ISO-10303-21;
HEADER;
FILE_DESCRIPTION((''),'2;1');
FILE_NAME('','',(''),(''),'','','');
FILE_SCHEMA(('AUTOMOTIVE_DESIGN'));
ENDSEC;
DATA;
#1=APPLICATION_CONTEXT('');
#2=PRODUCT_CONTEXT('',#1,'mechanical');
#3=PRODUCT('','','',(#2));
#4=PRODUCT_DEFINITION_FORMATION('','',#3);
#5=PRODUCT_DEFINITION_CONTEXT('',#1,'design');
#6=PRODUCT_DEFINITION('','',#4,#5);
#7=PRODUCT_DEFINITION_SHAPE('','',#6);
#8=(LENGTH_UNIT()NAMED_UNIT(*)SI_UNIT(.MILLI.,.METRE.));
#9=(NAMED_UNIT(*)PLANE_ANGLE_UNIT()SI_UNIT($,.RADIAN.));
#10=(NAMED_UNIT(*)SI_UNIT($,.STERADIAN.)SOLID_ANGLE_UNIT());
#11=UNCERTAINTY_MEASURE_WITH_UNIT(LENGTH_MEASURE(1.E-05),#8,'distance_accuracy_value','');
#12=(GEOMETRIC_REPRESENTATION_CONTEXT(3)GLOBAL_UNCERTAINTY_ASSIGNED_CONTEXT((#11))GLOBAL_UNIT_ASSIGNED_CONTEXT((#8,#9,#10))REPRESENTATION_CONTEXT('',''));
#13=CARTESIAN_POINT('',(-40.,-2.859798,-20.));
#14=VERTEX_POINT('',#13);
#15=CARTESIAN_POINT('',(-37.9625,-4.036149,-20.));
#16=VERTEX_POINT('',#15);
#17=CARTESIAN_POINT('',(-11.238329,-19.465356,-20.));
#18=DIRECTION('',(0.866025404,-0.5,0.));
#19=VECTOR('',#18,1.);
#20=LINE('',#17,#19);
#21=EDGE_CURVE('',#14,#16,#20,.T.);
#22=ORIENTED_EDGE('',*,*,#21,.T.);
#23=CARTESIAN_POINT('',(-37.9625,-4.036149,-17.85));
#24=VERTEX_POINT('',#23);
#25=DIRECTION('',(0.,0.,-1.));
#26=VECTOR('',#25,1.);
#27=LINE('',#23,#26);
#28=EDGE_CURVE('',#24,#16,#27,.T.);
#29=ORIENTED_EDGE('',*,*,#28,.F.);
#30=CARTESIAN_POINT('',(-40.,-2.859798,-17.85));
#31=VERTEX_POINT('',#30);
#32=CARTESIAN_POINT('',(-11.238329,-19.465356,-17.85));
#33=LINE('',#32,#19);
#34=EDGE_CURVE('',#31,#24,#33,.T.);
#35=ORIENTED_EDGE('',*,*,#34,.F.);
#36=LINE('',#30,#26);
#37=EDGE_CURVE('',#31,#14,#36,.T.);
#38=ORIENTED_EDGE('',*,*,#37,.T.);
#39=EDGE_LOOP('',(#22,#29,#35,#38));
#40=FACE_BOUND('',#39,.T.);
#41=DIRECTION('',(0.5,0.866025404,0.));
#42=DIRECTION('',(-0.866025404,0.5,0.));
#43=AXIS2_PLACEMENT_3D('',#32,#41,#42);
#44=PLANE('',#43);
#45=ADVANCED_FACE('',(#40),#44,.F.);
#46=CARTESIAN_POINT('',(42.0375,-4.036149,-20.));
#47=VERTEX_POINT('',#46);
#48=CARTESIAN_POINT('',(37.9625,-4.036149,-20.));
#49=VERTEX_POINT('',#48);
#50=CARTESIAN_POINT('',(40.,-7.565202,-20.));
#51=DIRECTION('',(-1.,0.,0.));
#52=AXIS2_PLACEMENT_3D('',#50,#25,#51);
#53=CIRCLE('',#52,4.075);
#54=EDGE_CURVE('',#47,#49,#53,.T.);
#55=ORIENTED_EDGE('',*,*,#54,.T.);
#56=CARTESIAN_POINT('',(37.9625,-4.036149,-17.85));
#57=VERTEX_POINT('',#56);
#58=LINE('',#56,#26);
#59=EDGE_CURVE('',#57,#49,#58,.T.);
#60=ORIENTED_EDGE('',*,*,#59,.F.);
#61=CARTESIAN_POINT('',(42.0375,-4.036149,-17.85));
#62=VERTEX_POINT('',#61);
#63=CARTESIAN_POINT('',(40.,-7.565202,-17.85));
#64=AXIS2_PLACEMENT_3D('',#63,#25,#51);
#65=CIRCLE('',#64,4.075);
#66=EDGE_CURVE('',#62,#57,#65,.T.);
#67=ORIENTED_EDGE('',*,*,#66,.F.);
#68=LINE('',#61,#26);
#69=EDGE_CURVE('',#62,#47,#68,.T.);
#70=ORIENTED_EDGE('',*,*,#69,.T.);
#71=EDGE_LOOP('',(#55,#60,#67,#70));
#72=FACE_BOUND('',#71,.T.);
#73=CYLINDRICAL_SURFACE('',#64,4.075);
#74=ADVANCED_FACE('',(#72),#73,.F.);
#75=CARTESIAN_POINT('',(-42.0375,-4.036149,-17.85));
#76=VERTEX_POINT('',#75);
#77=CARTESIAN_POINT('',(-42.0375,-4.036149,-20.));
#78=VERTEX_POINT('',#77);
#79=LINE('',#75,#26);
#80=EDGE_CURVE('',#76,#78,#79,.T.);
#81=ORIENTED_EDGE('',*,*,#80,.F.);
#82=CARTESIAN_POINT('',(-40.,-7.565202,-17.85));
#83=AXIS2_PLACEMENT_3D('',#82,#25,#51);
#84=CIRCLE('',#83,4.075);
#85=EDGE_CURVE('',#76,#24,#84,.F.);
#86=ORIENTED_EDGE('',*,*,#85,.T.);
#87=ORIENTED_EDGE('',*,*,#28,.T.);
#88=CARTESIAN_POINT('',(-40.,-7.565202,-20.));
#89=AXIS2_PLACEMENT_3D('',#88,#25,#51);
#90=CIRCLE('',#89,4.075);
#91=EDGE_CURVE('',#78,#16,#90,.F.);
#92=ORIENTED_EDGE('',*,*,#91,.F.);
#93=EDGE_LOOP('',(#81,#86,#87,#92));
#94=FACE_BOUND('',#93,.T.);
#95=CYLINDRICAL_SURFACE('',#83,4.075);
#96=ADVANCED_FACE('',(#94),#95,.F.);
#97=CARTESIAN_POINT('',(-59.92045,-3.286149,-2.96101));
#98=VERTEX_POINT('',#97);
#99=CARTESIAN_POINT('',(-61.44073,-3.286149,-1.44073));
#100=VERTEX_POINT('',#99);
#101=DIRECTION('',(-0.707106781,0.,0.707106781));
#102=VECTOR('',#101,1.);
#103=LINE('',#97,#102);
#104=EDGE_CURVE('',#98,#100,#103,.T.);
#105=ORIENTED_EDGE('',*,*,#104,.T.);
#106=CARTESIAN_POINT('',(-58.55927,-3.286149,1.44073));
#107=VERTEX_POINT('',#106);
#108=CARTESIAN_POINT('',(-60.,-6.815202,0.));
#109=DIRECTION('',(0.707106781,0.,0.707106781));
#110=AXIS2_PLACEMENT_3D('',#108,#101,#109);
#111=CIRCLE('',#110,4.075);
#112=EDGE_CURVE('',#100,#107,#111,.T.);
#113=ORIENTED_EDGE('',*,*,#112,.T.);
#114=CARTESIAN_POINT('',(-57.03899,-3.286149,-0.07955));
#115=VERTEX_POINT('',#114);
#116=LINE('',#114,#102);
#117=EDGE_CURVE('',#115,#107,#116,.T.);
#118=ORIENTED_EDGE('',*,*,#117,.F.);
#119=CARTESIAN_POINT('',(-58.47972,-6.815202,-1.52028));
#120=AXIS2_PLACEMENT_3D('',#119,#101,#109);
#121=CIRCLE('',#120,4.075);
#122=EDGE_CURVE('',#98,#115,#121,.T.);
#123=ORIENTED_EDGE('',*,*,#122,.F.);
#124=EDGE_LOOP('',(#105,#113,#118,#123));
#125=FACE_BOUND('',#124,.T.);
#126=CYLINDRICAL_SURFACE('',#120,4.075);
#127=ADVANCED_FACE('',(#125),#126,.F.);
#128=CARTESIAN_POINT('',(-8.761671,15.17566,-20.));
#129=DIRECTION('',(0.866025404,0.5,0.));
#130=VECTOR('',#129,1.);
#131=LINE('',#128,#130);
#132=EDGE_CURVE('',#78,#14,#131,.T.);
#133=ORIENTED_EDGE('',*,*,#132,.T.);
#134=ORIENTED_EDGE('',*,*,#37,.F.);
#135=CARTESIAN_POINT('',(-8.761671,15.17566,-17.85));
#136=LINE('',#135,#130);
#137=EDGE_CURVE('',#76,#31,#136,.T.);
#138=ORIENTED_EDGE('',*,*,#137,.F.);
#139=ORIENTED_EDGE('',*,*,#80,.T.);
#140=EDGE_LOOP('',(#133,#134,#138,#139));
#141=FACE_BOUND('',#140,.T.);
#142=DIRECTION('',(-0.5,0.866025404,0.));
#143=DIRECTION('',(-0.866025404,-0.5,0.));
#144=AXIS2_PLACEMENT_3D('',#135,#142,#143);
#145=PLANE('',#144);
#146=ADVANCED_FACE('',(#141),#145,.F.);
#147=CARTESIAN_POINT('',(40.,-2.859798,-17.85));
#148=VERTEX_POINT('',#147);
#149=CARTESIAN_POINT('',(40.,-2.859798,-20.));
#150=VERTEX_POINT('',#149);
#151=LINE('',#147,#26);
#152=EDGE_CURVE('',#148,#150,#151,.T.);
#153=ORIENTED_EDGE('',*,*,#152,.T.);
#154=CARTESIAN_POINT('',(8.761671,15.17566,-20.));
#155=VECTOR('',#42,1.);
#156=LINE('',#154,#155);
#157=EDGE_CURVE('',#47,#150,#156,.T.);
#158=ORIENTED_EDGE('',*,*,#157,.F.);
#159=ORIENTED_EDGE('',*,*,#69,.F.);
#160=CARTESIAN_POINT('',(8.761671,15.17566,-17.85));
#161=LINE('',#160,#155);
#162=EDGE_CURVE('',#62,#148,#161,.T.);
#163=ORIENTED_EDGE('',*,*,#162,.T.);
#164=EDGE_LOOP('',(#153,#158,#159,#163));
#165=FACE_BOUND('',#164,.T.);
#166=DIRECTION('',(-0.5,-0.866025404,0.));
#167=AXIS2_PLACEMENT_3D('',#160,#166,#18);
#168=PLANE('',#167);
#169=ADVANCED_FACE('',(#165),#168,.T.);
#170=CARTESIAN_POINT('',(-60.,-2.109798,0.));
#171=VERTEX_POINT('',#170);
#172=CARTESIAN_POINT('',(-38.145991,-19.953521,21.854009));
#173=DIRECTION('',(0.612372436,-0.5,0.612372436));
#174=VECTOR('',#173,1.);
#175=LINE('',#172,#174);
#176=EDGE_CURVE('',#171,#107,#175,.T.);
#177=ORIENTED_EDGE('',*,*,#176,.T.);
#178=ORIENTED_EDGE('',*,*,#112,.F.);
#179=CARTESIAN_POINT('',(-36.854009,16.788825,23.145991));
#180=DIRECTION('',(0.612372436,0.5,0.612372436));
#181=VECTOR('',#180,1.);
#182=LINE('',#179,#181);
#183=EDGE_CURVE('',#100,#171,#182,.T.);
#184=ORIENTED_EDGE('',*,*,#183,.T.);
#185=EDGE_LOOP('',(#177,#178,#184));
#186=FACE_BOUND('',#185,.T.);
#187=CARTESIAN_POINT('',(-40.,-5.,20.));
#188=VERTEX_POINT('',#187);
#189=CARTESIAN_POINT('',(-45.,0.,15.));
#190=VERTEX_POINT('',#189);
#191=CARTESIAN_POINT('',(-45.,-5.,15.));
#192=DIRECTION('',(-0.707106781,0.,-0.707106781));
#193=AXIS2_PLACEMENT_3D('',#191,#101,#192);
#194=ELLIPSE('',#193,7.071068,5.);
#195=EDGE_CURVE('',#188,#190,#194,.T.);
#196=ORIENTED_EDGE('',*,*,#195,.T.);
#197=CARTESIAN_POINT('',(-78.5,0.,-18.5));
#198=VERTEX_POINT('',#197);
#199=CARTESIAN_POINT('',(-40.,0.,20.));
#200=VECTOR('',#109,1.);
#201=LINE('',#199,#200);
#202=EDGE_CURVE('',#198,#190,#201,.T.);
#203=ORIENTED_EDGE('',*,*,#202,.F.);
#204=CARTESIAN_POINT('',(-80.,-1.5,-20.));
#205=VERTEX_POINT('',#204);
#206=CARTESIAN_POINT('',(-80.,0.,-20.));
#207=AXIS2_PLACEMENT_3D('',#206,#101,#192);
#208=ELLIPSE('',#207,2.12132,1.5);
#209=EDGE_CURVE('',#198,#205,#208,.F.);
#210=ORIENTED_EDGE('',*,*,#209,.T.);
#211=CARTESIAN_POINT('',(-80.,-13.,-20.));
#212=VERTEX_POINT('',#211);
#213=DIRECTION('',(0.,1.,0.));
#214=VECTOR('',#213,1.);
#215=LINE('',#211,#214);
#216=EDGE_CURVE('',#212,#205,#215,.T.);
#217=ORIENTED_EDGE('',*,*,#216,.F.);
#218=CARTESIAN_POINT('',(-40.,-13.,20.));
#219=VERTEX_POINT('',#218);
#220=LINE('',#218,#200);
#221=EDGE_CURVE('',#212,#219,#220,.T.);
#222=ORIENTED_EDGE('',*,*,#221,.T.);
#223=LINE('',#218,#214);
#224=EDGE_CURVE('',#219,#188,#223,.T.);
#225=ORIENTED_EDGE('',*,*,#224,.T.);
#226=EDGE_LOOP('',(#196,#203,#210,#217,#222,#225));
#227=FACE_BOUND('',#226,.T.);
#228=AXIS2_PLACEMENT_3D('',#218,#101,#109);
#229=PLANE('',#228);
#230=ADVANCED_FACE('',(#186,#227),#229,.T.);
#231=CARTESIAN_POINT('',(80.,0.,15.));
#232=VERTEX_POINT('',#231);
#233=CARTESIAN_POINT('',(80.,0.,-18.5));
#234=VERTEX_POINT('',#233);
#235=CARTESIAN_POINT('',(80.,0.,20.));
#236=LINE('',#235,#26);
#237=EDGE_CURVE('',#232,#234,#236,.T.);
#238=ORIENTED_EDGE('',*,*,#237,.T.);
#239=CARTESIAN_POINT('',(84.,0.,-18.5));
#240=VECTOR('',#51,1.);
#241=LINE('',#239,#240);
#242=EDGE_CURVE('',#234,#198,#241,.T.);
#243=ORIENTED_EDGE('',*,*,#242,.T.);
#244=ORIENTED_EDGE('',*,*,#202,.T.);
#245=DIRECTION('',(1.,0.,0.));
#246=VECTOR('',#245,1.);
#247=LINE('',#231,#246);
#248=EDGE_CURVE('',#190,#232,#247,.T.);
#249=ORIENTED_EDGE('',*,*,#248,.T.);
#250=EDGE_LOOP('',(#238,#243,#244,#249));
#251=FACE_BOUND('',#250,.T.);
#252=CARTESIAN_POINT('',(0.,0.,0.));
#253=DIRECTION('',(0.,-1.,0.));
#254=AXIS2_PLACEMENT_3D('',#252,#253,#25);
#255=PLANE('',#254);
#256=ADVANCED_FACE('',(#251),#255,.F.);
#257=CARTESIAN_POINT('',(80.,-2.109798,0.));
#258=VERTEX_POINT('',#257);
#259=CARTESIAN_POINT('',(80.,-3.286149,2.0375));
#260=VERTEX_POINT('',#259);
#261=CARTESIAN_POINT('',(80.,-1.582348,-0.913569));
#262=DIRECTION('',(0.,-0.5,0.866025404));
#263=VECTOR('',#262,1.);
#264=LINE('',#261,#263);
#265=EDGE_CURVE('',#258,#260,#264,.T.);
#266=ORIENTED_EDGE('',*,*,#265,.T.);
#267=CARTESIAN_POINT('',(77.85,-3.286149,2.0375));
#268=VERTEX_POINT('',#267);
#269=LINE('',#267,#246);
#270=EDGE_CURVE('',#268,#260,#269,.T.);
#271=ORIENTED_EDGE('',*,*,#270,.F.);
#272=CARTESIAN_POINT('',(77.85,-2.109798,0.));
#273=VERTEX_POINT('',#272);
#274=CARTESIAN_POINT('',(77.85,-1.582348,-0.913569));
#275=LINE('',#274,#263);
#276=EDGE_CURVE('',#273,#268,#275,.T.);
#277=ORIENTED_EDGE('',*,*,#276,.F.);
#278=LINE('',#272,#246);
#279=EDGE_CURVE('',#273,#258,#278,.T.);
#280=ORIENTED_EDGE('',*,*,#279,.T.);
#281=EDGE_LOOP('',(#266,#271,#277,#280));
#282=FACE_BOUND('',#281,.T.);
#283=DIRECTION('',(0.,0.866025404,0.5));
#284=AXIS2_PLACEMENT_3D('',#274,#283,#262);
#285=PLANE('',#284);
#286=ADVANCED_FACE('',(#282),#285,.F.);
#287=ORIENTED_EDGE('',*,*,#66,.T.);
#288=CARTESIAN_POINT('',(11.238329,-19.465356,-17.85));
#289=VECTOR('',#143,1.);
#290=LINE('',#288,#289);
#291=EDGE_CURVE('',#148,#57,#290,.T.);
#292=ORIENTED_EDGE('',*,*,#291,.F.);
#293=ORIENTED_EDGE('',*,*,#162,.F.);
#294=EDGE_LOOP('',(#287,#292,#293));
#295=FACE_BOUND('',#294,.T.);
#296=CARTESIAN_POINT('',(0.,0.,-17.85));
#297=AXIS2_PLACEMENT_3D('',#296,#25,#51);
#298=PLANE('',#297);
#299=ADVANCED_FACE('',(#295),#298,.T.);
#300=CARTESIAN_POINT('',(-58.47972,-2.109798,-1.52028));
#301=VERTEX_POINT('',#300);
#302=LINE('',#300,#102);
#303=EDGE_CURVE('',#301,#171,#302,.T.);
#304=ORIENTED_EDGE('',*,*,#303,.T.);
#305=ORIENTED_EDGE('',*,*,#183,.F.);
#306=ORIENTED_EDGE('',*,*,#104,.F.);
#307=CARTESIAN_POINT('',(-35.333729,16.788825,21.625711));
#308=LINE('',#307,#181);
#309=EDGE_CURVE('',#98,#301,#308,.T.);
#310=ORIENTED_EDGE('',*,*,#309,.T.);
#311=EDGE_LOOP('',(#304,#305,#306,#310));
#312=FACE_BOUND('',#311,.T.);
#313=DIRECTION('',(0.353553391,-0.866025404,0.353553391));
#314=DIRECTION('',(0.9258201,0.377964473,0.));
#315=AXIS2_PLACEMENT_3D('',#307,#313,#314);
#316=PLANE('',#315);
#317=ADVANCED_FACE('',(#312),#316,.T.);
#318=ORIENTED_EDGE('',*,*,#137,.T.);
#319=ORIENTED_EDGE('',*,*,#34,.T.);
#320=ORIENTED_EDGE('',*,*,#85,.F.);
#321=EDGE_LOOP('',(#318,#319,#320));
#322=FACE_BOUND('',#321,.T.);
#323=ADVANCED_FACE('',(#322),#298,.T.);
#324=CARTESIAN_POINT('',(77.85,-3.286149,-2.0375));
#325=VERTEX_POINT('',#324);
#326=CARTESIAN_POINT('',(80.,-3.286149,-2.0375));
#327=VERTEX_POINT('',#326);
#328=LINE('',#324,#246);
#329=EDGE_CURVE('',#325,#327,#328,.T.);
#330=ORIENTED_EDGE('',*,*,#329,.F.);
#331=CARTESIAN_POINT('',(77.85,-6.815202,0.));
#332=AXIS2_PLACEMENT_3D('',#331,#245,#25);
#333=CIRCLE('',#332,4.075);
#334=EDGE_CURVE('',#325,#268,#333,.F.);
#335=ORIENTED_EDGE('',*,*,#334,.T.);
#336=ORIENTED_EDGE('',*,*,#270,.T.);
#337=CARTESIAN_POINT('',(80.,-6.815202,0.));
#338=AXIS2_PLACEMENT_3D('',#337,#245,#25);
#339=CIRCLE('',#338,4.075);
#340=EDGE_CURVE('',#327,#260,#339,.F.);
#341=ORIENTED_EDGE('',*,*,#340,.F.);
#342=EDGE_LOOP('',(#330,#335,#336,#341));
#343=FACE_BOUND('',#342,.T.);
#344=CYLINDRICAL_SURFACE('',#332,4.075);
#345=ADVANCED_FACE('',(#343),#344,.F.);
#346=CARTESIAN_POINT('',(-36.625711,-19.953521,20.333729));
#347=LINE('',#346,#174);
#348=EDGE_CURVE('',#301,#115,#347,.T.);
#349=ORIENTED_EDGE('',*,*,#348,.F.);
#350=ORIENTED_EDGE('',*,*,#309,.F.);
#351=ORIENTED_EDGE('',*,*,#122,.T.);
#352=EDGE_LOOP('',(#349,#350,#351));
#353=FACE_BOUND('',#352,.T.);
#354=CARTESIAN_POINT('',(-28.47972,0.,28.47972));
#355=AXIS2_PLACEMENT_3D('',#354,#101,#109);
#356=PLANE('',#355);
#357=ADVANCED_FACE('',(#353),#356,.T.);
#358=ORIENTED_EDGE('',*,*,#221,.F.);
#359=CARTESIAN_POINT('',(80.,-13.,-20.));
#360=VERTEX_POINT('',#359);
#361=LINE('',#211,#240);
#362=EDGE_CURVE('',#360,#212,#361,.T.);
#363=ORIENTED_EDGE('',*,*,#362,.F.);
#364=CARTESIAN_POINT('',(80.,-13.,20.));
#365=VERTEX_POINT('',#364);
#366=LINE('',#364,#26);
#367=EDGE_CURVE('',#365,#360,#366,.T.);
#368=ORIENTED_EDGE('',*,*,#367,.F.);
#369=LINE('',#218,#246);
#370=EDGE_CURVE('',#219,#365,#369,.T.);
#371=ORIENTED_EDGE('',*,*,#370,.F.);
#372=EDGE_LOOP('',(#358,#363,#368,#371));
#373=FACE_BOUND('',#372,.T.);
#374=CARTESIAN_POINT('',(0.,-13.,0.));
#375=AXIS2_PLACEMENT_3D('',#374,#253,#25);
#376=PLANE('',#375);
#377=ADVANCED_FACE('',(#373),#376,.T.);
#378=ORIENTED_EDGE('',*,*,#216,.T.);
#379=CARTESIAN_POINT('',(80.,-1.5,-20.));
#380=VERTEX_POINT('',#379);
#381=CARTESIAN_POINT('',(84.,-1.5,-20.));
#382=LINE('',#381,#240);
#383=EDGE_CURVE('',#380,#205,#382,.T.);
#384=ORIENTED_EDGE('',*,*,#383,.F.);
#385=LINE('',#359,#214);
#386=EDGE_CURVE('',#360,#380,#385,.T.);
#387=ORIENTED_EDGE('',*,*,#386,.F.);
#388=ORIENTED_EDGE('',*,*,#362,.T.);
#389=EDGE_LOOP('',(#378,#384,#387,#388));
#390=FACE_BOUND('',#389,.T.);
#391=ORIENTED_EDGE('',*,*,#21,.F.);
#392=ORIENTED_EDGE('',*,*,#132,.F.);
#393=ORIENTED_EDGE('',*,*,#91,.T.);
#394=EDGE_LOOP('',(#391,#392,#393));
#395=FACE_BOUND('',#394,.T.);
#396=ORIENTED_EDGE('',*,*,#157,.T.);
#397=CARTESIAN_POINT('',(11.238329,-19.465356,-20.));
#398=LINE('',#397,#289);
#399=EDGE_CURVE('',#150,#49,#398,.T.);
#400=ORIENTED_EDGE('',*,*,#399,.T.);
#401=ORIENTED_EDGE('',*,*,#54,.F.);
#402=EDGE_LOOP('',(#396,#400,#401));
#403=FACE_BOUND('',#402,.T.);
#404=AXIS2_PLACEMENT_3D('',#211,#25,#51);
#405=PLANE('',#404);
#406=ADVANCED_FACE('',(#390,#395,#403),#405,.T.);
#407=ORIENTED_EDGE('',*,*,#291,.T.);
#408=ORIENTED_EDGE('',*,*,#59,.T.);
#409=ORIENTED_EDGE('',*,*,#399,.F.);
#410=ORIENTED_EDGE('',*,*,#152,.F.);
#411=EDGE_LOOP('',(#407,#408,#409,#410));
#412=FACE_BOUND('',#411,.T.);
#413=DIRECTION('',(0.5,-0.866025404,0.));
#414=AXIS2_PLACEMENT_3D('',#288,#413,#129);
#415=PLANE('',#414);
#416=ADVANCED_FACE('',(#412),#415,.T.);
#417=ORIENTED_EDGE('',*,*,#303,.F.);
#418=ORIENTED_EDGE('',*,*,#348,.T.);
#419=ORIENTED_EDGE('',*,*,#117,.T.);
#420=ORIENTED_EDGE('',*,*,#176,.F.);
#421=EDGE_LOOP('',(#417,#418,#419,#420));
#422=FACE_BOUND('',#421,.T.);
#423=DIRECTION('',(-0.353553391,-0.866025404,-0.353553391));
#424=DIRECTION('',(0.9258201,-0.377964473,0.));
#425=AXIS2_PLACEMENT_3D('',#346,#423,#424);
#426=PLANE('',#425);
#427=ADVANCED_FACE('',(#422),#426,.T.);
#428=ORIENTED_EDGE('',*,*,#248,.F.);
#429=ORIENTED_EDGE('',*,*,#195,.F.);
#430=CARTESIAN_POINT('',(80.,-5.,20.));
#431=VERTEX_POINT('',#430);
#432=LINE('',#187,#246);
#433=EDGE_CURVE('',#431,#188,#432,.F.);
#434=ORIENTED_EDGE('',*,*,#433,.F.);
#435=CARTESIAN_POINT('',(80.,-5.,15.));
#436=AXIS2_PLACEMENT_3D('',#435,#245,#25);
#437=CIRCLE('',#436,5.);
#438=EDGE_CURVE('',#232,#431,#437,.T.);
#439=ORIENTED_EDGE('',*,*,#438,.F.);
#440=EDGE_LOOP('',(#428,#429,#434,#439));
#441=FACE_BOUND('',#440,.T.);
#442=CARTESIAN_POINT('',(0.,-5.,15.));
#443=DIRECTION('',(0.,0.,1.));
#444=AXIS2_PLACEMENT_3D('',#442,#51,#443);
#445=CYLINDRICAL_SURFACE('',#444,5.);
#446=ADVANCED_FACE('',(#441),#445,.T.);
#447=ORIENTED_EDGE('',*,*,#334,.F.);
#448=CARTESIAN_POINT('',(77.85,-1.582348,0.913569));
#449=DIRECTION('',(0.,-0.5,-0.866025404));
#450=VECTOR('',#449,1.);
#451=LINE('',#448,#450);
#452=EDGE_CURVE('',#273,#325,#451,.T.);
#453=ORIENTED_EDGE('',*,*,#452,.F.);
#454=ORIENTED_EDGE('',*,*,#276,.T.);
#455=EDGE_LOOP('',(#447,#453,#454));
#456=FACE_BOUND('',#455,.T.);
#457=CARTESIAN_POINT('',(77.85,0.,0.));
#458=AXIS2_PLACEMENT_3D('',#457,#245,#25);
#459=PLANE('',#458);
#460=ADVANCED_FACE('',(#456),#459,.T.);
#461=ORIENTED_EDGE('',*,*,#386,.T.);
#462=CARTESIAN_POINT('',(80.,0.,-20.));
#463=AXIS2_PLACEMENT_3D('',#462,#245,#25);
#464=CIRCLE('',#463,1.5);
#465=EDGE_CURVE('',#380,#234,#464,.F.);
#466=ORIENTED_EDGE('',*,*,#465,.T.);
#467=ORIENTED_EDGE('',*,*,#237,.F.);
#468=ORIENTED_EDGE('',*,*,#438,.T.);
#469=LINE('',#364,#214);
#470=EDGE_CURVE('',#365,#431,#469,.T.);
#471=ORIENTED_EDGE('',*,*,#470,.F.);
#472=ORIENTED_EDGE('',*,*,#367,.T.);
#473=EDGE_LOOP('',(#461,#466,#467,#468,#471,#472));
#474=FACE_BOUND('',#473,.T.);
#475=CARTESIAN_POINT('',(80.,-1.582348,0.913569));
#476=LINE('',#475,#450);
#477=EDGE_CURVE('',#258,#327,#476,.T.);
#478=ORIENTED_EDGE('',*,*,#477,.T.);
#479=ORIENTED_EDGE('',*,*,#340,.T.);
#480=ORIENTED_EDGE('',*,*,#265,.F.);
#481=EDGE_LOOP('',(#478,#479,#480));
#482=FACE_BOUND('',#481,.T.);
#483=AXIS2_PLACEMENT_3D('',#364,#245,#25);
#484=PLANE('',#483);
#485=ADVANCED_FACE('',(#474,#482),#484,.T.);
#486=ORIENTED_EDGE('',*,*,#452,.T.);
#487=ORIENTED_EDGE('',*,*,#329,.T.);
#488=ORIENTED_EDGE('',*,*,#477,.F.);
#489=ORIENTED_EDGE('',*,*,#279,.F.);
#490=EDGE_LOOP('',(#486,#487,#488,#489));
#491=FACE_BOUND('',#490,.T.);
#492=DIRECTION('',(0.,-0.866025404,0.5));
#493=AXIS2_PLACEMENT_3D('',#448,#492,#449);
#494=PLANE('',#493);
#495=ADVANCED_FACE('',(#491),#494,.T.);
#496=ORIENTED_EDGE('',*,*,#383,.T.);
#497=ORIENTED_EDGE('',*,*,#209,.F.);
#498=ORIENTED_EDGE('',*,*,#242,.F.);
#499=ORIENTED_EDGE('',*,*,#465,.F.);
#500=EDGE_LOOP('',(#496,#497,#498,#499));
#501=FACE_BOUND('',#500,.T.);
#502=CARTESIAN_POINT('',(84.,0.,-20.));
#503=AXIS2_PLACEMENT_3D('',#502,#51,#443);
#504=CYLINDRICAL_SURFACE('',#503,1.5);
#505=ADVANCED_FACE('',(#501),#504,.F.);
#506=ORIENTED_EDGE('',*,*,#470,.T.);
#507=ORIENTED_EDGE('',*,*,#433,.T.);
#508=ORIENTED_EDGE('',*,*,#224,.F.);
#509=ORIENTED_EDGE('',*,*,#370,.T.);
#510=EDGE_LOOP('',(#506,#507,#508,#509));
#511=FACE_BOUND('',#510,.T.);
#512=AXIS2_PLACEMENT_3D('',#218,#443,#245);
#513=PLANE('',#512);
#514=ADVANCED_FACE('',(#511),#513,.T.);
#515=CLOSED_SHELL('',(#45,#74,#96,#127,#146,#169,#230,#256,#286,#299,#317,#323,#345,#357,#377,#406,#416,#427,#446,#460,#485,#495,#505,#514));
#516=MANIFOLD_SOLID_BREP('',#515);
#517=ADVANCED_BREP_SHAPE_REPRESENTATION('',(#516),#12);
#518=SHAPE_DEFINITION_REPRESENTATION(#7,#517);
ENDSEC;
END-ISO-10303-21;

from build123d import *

# Parameters (mm, degrees)
EXTRUDE_1_DEPTH     = 13
SWEEP_START         = -80
SWEEP_1_DEPTH       = 160
SKETCH_6_R          = 4.075
CUT_EXTRUDE_1_DEPTH = 2.15
FILLET_1_R          = 5
SKETCH_7_R          = 4.075
CUT_EXTRUDE_2_DEPTH = 2.15
SKETCH_8_R          = 4.075
CUT_EXTRUDE_3_DEPTH = 2.15


# Read off the part's stored shape, not the designer's step: Вырез-По траектории1
with BuildPart() as part:
    # Эскиз1 → Бобышка-Вытянуть1 (new body)
    with BuildSketch(Plane(origin=(0, 0, 0), x_dir=(1, 0, 0), z_dir=(0, 1, 0))):
        Polygon((-40, -20), (80, -20), (80, 20), (-80, 20), align=None)
    extrude(amount=-EXTRUDE_1_DEPTH)

    # Вырез-По траектории1 outline → Вырез-По траектории1 (cut)
    with BuildSketch(Plane.YZ.offset(SWEEP_START)):
        with BuildLine():
            ThreePointArc((0, -18.5), (-1.060660172, -18.939339828), (-1.5, -20))
            Line((-1.5, -20), (0, -20))
            Line((0, -20), (0, -18.5))
        make_face()
    extrude(amount=SWEEP_1_DEPTH, mode=Mode.SUBTRACT)

    # Эскиз6 → Вырез-Вытянуть1 (cut)
    with BuildSketch(Plane(origin=(0, 0, -20), x_dir=(-1, 0, 0), z_dir=(0, 0, -1))):
        with Locations((-40, -7.565202347)):
            Circle(SKETCH_6_R)
        with BuildLine():
            Line((-40, -2.859797653), (-42.0375, -4.036148827))
            ThreePointArc((-42.0375, -4.036148827), (-40, -3.490202347), (-37.9625, -4.036148827))
            Line((-37.9625, -4.036148827), (-40, -2.859797653))
        make_face()
        with Locations((40, -7.565202347)):
            Circle(SKETCH_6_R)
        with BuildLine():
            ThreePointArc((37.9625, -4.036148827), (40, -3.490202347), (42.0375, -4.036148827))
            Line((42.0375, -4.036148827), (40, -2.859797653))
            Line((40, -2.859797653), (37.9625, -4.036148827))
        make_face()
    extrude(amount=-CUT_EXTRUDE_1_DEPTH, mode=Mode.SUBTRACT)

    # Скругление1
    fillet_1_edges = [part.edges().sort_by_distance(p)[0] for p in [
        (20, 0, 20),
    ]]
    fillet(fillet_1_edges, radius=FILLET_1_R)

    # Эскиз7 → Вырез-Вытянуть2 (cut)
    with BuildSketch(Plane.ZY.offset(-80)):
        with Locations((0, -6.815202347)):
            Circle(SKETCH_7_R)
        with BuildLine():
            Line((2.0375, -3.286148827), (0, -2.109797653))
            Line((0, -2.109797653), (-2.0375, -3.286148827))
            ThreePointArc((-2.0375, -3.286148827), (0, -2.740202347), (2.0375, -3.286148827))
        make_face()
    extrude(amount=CUT_EXTRUDE_2_DEPTH, mode=Mode.SUBTRACT)

    # Эскиз8 → Вырез-Вытянуть3 (cut)
    with BuildSketch(Plane(origin=(-30, 0, 30), x_dir=(0.7071067811865515, 0, 0.7071067811865436), z_dir=(-0.7071067811865436, 0, 0.7071067811865515))):
        with Locations((-42.426406871, -6.815202347)):
            Circle(SKETCH_8_R)
        with BuildLine():
            Line((-42.426406871, -2.109797653), (-44.463906871, -3.286148827))
            ThreePointArc((-44.463906871, -3.286148827), (-42.426406871, -2.740202347), (-40.388906871, -3.286148827))
            Line((-40.388906871, -3.286148827), (-42.426406871, -2.109797653))
        make_face()
    extrude(amount=-CUT_EXTRUDE_3_DEPTH, mode=Mode.SUBTRACT)


solid = part.part
